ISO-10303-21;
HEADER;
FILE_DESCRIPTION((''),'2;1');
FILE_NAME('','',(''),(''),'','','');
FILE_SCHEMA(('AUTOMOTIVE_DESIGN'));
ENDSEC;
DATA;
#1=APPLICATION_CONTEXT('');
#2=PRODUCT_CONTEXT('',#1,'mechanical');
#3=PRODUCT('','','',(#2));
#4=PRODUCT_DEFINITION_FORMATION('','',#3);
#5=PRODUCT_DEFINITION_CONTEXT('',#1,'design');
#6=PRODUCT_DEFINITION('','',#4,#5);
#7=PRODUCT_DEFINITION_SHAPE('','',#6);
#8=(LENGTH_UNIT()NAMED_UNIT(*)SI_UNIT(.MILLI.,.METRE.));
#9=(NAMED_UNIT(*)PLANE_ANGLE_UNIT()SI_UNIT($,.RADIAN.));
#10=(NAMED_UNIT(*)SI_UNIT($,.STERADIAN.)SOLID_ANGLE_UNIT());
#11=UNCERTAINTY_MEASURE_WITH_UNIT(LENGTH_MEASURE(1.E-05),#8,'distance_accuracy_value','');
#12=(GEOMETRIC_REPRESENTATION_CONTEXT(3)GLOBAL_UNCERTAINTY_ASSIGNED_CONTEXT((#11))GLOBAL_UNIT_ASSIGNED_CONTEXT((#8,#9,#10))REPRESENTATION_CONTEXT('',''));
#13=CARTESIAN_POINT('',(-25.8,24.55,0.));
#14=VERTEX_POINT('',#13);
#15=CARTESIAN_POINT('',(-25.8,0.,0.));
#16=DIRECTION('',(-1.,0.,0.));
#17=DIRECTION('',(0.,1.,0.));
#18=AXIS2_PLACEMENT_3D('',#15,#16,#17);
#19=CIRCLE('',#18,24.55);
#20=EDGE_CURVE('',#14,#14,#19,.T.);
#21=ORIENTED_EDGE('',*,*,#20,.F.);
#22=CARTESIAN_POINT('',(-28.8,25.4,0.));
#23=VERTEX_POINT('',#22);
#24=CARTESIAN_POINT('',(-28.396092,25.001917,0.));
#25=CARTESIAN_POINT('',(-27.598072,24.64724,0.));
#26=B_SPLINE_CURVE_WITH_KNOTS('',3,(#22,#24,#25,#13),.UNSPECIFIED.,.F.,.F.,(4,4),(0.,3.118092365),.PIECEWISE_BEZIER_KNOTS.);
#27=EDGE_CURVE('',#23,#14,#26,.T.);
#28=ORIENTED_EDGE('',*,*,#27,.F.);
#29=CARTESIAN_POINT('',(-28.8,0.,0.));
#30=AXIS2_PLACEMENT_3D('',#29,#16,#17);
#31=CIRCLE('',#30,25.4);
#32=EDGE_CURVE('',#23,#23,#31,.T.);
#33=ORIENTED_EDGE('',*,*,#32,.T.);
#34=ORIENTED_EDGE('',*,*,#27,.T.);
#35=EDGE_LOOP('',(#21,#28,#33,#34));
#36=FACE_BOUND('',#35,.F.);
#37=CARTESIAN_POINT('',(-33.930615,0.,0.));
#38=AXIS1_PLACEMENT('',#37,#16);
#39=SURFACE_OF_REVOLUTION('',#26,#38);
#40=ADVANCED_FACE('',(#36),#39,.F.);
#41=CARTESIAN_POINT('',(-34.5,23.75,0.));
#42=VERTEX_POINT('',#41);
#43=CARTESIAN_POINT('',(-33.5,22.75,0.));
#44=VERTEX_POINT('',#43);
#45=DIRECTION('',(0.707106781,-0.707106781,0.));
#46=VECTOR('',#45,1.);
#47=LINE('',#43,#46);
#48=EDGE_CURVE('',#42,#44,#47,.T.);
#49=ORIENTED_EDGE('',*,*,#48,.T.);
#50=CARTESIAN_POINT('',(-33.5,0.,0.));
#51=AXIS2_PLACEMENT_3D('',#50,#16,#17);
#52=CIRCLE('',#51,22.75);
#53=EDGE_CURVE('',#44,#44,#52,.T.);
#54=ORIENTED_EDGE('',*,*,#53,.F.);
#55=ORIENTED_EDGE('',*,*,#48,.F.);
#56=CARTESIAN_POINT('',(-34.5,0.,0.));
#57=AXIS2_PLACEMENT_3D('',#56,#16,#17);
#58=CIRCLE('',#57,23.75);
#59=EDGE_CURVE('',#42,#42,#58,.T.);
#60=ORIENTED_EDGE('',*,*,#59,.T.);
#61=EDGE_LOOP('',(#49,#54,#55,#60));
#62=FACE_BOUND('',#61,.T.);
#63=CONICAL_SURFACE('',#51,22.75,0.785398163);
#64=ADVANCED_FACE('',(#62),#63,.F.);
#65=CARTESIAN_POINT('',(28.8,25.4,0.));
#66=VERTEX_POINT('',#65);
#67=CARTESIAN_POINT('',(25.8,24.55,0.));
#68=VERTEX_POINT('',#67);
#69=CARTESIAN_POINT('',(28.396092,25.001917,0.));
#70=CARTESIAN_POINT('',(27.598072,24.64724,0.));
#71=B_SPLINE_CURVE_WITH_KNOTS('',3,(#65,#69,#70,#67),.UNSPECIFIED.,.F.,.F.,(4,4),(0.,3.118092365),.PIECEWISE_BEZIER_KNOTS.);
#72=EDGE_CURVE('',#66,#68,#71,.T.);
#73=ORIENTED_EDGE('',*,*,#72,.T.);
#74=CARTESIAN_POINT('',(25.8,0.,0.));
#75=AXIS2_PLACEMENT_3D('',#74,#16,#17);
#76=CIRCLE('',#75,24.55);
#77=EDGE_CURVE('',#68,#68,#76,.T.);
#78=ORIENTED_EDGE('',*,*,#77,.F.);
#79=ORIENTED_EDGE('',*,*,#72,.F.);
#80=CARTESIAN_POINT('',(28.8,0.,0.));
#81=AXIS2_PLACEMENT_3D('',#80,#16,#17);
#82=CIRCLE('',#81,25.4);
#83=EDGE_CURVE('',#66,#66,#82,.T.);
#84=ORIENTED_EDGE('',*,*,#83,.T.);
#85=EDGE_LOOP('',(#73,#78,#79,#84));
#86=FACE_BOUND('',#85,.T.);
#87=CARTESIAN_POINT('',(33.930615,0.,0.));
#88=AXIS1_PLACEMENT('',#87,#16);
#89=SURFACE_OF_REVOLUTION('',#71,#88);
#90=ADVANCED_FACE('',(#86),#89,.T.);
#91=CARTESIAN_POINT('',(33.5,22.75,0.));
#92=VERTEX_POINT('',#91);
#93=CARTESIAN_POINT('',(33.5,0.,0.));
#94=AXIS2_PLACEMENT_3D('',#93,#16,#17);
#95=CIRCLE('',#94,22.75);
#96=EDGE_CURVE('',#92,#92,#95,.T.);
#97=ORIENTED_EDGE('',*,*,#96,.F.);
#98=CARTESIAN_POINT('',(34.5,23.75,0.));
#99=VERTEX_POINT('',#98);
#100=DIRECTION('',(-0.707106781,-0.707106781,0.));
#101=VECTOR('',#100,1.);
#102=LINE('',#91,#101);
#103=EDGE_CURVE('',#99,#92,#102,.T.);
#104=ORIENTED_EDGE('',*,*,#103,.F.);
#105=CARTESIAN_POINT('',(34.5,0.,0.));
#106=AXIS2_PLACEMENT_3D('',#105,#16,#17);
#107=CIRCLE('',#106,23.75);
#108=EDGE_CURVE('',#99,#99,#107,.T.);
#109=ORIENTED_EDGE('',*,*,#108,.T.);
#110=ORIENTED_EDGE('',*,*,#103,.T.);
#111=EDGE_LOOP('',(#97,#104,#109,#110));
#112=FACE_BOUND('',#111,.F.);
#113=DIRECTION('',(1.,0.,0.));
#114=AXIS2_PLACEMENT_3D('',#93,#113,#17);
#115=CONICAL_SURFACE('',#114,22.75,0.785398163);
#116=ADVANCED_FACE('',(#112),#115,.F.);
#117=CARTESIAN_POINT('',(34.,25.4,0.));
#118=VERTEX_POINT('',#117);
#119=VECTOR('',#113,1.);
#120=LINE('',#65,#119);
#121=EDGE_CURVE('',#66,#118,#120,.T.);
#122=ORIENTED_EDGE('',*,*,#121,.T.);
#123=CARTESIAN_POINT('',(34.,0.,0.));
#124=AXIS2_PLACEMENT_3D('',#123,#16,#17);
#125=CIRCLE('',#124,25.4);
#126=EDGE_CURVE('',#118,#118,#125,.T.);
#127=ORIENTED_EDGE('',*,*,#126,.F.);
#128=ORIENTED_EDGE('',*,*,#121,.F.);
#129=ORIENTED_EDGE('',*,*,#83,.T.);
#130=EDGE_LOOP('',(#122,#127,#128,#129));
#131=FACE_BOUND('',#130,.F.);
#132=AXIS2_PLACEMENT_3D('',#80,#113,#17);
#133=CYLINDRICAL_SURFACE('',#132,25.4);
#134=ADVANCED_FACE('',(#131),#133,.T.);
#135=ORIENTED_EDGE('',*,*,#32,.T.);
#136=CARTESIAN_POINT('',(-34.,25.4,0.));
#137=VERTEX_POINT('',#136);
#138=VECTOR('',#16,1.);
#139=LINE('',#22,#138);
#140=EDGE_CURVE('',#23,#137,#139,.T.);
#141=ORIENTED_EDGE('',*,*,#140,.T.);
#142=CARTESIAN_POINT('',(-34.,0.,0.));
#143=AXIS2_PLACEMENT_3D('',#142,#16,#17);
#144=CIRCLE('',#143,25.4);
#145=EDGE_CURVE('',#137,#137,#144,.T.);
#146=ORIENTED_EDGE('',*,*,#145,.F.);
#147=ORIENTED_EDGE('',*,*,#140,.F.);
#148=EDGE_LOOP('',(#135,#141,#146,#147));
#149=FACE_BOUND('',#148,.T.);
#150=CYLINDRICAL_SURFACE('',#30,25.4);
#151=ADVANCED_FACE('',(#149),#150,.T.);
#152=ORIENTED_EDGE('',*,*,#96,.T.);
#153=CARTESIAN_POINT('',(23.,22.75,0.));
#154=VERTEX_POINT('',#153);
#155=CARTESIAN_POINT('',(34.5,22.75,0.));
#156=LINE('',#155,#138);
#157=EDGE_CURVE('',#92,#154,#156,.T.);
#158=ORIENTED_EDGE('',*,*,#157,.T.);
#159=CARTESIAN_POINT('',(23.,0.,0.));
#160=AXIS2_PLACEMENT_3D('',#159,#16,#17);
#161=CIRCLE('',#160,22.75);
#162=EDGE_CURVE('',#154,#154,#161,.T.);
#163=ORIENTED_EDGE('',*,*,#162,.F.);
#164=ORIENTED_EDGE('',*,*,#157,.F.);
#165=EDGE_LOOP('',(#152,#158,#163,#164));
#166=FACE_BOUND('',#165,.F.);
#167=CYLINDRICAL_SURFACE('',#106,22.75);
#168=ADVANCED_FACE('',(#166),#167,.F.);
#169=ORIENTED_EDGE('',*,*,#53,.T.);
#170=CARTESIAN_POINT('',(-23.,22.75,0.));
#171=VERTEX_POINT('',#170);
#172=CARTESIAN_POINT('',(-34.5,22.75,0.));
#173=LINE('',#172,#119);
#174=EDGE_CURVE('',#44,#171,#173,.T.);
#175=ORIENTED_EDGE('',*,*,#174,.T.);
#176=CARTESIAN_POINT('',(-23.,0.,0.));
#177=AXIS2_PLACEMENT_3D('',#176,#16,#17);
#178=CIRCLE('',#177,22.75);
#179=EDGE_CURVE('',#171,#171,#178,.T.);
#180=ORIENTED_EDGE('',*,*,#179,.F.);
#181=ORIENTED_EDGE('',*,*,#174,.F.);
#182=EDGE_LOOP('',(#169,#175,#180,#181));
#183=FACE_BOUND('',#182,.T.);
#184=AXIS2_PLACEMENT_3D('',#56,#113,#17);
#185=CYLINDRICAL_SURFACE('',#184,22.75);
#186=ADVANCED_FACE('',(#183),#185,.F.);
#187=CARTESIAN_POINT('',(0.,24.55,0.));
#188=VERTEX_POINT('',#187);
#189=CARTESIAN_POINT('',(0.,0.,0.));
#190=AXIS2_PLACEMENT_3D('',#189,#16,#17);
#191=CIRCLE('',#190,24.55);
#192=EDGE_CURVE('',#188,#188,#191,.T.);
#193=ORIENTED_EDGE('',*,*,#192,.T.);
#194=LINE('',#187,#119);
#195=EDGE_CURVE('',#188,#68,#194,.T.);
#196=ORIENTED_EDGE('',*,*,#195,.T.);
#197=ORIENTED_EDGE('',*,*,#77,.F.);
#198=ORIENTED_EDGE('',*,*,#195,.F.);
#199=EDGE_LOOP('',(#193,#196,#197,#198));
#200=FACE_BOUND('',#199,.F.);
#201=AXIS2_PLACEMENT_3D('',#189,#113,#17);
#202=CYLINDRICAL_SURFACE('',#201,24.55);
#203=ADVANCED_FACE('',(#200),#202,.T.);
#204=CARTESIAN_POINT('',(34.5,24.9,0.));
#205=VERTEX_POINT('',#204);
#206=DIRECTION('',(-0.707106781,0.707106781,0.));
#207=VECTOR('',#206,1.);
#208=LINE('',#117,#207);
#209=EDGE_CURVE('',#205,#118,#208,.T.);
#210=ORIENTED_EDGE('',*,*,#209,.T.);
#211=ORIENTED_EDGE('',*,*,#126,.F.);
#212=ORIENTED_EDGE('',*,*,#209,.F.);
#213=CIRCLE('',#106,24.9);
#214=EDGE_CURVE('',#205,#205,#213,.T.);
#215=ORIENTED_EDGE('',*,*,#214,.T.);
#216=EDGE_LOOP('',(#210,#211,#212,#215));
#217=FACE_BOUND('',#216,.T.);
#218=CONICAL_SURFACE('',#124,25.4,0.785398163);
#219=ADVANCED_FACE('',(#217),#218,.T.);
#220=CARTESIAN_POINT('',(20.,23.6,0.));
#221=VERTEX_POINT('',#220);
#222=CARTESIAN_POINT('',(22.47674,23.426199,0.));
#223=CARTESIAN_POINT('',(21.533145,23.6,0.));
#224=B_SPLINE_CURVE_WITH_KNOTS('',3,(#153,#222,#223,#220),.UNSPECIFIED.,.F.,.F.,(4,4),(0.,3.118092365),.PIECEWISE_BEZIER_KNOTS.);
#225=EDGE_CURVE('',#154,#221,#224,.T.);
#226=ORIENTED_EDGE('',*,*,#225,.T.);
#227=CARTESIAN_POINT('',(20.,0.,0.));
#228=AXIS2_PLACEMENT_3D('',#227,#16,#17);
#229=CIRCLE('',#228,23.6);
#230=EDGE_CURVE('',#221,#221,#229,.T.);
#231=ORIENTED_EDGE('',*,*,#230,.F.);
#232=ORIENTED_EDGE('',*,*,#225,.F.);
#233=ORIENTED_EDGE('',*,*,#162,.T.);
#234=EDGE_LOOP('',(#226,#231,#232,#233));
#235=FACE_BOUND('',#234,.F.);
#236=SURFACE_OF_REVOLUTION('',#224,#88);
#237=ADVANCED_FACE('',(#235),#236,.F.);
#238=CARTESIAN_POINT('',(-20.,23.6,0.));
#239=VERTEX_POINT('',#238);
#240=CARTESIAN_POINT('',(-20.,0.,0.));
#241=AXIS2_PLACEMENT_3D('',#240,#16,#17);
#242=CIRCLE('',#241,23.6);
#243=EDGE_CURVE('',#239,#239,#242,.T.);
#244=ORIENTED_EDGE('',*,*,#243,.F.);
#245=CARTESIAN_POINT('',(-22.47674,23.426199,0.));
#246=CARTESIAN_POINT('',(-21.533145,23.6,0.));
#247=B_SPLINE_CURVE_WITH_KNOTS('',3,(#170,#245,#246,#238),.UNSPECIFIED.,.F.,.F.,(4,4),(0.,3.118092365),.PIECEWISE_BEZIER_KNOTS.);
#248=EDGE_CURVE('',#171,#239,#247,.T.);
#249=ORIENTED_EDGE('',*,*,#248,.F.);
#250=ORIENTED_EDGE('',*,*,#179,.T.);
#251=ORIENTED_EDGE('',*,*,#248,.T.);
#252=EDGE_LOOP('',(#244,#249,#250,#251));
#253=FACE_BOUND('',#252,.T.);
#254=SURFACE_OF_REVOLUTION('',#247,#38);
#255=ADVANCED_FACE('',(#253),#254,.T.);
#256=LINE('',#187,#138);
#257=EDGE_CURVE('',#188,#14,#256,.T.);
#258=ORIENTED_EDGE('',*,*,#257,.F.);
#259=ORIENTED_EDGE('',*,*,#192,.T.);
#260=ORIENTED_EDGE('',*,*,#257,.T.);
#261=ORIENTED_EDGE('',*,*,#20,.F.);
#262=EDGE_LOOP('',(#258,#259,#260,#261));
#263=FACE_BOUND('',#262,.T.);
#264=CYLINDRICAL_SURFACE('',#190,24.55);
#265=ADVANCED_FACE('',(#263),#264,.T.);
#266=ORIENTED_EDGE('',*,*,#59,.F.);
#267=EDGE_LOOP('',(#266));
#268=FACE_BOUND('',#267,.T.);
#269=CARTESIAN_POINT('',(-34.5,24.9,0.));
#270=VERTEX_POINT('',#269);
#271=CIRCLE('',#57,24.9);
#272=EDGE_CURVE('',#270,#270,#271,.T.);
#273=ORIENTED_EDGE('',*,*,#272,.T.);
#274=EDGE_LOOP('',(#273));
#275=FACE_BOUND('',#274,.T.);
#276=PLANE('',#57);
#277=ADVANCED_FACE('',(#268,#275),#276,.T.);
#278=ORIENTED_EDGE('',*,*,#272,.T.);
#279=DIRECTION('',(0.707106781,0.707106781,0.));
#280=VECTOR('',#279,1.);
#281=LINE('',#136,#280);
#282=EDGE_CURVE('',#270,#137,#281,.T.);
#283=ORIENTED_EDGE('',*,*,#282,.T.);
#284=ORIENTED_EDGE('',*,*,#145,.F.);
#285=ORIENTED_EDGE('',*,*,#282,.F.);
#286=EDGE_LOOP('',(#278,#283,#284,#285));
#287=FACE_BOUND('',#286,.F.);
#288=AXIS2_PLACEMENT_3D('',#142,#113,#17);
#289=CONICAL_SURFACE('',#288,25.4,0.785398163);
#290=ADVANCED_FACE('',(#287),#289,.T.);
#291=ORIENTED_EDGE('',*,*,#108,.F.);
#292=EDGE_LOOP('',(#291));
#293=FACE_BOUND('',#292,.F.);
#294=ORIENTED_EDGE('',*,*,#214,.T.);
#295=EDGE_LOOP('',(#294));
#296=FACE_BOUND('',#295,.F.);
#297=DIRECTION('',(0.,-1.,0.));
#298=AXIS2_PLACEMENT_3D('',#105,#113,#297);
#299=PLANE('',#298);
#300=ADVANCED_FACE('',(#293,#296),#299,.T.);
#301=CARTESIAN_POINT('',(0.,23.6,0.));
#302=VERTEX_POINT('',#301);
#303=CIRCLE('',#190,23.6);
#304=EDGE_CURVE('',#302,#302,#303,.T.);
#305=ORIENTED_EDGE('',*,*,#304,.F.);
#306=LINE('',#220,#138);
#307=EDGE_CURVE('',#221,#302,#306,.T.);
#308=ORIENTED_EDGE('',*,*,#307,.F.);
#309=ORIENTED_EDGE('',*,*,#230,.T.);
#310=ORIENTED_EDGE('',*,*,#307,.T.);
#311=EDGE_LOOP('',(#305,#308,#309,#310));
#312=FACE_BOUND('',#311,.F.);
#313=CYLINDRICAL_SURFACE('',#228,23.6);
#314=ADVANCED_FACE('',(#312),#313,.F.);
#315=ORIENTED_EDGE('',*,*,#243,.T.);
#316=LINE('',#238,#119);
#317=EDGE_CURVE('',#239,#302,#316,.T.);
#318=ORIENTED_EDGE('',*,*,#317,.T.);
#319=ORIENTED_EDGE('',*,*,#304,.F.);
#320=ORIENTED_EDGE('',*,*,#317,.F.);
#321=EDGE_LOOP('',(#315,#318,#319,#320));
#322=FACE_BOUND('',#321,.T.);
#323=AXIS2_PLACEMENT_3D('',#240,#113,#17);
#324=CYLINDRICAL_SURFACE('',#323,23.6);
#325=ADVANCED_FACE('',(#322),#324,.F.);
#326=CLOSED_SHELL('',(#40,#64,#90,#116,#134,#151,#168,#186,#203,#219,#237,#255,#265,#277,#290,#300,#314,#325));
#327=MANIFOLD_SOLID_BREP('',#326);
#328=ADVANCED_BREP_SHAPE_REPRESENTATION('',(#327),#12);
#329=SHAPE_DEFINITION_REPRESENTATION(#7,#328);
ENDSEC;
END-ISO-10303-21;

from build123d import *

# Parameters (mm, degrees)
F2_SIZE = 0.5
F3_SIZE = 1


with BuildPart() as f1:
    # F0 (on Top) → F1 (revolve)
    with BuildSketch(Plane.XY):
        with BuildLine():
            Line((-34.5, 25.4), (-34.5, 22.75))
            Line((-34.5, 22.75), (-25.8, 22.75))
            Line((-25.8, 22.75), (-23, 22.75))
            add(Edge.make_bspline(
                [(-23, 22.75), (-22.4767401814, 23.4261993319), (-21.5331446379, 23.6), (-20, 23.6)],
                knots=[0, 0, 0, 0, 3.1180923655, 3.1180923655, 3.1180923655, 3.1180923655], degree=3))
            Line((-20, 23.6), (0, 23.6))
            Line((0, 23.6), (0, 24.55))
            Line((0, 24.55), (-25.8, 24.55))
            add(Edge.make_bspline(
                [(-28.8, 25.4), (-28.3960923553, 25.0019170344), (-27.5980718434, 24.6472395957), (-25.8, 24.55)],
                knots=[0, 0, 0, 0, 3.1180923655, 3.1180923655, 3.1180923655, 3.1180923655], degree=3))
            Line((-28.8, 25.4), (-34.5, 25.4))
        make_face()
    revolve(axis=Axis((-33.9306145906, 0, 0), (-1, 0, 0)))

    # F2
    f2_edges = [f1.edges().sort_by_distance(p)[0] for p in [
        (-34.5, -25.4, 0),
    ]]
    chamfer(f2_edges, length=F2_SIZE)

    # F3
    f3_edges = [f1.edges().sort_by_distance(p)[0] for p in [
        (-34.5, -22.75, 0),
    ]]
    chamfer(f3_edges, length=F3_SIZE)

    # F4: F1 across face


with BuildPart() as f1_1:
    add(f1.part)
    add(f1.part.mirror(Plane.YZ))


solid = f1_1.part
